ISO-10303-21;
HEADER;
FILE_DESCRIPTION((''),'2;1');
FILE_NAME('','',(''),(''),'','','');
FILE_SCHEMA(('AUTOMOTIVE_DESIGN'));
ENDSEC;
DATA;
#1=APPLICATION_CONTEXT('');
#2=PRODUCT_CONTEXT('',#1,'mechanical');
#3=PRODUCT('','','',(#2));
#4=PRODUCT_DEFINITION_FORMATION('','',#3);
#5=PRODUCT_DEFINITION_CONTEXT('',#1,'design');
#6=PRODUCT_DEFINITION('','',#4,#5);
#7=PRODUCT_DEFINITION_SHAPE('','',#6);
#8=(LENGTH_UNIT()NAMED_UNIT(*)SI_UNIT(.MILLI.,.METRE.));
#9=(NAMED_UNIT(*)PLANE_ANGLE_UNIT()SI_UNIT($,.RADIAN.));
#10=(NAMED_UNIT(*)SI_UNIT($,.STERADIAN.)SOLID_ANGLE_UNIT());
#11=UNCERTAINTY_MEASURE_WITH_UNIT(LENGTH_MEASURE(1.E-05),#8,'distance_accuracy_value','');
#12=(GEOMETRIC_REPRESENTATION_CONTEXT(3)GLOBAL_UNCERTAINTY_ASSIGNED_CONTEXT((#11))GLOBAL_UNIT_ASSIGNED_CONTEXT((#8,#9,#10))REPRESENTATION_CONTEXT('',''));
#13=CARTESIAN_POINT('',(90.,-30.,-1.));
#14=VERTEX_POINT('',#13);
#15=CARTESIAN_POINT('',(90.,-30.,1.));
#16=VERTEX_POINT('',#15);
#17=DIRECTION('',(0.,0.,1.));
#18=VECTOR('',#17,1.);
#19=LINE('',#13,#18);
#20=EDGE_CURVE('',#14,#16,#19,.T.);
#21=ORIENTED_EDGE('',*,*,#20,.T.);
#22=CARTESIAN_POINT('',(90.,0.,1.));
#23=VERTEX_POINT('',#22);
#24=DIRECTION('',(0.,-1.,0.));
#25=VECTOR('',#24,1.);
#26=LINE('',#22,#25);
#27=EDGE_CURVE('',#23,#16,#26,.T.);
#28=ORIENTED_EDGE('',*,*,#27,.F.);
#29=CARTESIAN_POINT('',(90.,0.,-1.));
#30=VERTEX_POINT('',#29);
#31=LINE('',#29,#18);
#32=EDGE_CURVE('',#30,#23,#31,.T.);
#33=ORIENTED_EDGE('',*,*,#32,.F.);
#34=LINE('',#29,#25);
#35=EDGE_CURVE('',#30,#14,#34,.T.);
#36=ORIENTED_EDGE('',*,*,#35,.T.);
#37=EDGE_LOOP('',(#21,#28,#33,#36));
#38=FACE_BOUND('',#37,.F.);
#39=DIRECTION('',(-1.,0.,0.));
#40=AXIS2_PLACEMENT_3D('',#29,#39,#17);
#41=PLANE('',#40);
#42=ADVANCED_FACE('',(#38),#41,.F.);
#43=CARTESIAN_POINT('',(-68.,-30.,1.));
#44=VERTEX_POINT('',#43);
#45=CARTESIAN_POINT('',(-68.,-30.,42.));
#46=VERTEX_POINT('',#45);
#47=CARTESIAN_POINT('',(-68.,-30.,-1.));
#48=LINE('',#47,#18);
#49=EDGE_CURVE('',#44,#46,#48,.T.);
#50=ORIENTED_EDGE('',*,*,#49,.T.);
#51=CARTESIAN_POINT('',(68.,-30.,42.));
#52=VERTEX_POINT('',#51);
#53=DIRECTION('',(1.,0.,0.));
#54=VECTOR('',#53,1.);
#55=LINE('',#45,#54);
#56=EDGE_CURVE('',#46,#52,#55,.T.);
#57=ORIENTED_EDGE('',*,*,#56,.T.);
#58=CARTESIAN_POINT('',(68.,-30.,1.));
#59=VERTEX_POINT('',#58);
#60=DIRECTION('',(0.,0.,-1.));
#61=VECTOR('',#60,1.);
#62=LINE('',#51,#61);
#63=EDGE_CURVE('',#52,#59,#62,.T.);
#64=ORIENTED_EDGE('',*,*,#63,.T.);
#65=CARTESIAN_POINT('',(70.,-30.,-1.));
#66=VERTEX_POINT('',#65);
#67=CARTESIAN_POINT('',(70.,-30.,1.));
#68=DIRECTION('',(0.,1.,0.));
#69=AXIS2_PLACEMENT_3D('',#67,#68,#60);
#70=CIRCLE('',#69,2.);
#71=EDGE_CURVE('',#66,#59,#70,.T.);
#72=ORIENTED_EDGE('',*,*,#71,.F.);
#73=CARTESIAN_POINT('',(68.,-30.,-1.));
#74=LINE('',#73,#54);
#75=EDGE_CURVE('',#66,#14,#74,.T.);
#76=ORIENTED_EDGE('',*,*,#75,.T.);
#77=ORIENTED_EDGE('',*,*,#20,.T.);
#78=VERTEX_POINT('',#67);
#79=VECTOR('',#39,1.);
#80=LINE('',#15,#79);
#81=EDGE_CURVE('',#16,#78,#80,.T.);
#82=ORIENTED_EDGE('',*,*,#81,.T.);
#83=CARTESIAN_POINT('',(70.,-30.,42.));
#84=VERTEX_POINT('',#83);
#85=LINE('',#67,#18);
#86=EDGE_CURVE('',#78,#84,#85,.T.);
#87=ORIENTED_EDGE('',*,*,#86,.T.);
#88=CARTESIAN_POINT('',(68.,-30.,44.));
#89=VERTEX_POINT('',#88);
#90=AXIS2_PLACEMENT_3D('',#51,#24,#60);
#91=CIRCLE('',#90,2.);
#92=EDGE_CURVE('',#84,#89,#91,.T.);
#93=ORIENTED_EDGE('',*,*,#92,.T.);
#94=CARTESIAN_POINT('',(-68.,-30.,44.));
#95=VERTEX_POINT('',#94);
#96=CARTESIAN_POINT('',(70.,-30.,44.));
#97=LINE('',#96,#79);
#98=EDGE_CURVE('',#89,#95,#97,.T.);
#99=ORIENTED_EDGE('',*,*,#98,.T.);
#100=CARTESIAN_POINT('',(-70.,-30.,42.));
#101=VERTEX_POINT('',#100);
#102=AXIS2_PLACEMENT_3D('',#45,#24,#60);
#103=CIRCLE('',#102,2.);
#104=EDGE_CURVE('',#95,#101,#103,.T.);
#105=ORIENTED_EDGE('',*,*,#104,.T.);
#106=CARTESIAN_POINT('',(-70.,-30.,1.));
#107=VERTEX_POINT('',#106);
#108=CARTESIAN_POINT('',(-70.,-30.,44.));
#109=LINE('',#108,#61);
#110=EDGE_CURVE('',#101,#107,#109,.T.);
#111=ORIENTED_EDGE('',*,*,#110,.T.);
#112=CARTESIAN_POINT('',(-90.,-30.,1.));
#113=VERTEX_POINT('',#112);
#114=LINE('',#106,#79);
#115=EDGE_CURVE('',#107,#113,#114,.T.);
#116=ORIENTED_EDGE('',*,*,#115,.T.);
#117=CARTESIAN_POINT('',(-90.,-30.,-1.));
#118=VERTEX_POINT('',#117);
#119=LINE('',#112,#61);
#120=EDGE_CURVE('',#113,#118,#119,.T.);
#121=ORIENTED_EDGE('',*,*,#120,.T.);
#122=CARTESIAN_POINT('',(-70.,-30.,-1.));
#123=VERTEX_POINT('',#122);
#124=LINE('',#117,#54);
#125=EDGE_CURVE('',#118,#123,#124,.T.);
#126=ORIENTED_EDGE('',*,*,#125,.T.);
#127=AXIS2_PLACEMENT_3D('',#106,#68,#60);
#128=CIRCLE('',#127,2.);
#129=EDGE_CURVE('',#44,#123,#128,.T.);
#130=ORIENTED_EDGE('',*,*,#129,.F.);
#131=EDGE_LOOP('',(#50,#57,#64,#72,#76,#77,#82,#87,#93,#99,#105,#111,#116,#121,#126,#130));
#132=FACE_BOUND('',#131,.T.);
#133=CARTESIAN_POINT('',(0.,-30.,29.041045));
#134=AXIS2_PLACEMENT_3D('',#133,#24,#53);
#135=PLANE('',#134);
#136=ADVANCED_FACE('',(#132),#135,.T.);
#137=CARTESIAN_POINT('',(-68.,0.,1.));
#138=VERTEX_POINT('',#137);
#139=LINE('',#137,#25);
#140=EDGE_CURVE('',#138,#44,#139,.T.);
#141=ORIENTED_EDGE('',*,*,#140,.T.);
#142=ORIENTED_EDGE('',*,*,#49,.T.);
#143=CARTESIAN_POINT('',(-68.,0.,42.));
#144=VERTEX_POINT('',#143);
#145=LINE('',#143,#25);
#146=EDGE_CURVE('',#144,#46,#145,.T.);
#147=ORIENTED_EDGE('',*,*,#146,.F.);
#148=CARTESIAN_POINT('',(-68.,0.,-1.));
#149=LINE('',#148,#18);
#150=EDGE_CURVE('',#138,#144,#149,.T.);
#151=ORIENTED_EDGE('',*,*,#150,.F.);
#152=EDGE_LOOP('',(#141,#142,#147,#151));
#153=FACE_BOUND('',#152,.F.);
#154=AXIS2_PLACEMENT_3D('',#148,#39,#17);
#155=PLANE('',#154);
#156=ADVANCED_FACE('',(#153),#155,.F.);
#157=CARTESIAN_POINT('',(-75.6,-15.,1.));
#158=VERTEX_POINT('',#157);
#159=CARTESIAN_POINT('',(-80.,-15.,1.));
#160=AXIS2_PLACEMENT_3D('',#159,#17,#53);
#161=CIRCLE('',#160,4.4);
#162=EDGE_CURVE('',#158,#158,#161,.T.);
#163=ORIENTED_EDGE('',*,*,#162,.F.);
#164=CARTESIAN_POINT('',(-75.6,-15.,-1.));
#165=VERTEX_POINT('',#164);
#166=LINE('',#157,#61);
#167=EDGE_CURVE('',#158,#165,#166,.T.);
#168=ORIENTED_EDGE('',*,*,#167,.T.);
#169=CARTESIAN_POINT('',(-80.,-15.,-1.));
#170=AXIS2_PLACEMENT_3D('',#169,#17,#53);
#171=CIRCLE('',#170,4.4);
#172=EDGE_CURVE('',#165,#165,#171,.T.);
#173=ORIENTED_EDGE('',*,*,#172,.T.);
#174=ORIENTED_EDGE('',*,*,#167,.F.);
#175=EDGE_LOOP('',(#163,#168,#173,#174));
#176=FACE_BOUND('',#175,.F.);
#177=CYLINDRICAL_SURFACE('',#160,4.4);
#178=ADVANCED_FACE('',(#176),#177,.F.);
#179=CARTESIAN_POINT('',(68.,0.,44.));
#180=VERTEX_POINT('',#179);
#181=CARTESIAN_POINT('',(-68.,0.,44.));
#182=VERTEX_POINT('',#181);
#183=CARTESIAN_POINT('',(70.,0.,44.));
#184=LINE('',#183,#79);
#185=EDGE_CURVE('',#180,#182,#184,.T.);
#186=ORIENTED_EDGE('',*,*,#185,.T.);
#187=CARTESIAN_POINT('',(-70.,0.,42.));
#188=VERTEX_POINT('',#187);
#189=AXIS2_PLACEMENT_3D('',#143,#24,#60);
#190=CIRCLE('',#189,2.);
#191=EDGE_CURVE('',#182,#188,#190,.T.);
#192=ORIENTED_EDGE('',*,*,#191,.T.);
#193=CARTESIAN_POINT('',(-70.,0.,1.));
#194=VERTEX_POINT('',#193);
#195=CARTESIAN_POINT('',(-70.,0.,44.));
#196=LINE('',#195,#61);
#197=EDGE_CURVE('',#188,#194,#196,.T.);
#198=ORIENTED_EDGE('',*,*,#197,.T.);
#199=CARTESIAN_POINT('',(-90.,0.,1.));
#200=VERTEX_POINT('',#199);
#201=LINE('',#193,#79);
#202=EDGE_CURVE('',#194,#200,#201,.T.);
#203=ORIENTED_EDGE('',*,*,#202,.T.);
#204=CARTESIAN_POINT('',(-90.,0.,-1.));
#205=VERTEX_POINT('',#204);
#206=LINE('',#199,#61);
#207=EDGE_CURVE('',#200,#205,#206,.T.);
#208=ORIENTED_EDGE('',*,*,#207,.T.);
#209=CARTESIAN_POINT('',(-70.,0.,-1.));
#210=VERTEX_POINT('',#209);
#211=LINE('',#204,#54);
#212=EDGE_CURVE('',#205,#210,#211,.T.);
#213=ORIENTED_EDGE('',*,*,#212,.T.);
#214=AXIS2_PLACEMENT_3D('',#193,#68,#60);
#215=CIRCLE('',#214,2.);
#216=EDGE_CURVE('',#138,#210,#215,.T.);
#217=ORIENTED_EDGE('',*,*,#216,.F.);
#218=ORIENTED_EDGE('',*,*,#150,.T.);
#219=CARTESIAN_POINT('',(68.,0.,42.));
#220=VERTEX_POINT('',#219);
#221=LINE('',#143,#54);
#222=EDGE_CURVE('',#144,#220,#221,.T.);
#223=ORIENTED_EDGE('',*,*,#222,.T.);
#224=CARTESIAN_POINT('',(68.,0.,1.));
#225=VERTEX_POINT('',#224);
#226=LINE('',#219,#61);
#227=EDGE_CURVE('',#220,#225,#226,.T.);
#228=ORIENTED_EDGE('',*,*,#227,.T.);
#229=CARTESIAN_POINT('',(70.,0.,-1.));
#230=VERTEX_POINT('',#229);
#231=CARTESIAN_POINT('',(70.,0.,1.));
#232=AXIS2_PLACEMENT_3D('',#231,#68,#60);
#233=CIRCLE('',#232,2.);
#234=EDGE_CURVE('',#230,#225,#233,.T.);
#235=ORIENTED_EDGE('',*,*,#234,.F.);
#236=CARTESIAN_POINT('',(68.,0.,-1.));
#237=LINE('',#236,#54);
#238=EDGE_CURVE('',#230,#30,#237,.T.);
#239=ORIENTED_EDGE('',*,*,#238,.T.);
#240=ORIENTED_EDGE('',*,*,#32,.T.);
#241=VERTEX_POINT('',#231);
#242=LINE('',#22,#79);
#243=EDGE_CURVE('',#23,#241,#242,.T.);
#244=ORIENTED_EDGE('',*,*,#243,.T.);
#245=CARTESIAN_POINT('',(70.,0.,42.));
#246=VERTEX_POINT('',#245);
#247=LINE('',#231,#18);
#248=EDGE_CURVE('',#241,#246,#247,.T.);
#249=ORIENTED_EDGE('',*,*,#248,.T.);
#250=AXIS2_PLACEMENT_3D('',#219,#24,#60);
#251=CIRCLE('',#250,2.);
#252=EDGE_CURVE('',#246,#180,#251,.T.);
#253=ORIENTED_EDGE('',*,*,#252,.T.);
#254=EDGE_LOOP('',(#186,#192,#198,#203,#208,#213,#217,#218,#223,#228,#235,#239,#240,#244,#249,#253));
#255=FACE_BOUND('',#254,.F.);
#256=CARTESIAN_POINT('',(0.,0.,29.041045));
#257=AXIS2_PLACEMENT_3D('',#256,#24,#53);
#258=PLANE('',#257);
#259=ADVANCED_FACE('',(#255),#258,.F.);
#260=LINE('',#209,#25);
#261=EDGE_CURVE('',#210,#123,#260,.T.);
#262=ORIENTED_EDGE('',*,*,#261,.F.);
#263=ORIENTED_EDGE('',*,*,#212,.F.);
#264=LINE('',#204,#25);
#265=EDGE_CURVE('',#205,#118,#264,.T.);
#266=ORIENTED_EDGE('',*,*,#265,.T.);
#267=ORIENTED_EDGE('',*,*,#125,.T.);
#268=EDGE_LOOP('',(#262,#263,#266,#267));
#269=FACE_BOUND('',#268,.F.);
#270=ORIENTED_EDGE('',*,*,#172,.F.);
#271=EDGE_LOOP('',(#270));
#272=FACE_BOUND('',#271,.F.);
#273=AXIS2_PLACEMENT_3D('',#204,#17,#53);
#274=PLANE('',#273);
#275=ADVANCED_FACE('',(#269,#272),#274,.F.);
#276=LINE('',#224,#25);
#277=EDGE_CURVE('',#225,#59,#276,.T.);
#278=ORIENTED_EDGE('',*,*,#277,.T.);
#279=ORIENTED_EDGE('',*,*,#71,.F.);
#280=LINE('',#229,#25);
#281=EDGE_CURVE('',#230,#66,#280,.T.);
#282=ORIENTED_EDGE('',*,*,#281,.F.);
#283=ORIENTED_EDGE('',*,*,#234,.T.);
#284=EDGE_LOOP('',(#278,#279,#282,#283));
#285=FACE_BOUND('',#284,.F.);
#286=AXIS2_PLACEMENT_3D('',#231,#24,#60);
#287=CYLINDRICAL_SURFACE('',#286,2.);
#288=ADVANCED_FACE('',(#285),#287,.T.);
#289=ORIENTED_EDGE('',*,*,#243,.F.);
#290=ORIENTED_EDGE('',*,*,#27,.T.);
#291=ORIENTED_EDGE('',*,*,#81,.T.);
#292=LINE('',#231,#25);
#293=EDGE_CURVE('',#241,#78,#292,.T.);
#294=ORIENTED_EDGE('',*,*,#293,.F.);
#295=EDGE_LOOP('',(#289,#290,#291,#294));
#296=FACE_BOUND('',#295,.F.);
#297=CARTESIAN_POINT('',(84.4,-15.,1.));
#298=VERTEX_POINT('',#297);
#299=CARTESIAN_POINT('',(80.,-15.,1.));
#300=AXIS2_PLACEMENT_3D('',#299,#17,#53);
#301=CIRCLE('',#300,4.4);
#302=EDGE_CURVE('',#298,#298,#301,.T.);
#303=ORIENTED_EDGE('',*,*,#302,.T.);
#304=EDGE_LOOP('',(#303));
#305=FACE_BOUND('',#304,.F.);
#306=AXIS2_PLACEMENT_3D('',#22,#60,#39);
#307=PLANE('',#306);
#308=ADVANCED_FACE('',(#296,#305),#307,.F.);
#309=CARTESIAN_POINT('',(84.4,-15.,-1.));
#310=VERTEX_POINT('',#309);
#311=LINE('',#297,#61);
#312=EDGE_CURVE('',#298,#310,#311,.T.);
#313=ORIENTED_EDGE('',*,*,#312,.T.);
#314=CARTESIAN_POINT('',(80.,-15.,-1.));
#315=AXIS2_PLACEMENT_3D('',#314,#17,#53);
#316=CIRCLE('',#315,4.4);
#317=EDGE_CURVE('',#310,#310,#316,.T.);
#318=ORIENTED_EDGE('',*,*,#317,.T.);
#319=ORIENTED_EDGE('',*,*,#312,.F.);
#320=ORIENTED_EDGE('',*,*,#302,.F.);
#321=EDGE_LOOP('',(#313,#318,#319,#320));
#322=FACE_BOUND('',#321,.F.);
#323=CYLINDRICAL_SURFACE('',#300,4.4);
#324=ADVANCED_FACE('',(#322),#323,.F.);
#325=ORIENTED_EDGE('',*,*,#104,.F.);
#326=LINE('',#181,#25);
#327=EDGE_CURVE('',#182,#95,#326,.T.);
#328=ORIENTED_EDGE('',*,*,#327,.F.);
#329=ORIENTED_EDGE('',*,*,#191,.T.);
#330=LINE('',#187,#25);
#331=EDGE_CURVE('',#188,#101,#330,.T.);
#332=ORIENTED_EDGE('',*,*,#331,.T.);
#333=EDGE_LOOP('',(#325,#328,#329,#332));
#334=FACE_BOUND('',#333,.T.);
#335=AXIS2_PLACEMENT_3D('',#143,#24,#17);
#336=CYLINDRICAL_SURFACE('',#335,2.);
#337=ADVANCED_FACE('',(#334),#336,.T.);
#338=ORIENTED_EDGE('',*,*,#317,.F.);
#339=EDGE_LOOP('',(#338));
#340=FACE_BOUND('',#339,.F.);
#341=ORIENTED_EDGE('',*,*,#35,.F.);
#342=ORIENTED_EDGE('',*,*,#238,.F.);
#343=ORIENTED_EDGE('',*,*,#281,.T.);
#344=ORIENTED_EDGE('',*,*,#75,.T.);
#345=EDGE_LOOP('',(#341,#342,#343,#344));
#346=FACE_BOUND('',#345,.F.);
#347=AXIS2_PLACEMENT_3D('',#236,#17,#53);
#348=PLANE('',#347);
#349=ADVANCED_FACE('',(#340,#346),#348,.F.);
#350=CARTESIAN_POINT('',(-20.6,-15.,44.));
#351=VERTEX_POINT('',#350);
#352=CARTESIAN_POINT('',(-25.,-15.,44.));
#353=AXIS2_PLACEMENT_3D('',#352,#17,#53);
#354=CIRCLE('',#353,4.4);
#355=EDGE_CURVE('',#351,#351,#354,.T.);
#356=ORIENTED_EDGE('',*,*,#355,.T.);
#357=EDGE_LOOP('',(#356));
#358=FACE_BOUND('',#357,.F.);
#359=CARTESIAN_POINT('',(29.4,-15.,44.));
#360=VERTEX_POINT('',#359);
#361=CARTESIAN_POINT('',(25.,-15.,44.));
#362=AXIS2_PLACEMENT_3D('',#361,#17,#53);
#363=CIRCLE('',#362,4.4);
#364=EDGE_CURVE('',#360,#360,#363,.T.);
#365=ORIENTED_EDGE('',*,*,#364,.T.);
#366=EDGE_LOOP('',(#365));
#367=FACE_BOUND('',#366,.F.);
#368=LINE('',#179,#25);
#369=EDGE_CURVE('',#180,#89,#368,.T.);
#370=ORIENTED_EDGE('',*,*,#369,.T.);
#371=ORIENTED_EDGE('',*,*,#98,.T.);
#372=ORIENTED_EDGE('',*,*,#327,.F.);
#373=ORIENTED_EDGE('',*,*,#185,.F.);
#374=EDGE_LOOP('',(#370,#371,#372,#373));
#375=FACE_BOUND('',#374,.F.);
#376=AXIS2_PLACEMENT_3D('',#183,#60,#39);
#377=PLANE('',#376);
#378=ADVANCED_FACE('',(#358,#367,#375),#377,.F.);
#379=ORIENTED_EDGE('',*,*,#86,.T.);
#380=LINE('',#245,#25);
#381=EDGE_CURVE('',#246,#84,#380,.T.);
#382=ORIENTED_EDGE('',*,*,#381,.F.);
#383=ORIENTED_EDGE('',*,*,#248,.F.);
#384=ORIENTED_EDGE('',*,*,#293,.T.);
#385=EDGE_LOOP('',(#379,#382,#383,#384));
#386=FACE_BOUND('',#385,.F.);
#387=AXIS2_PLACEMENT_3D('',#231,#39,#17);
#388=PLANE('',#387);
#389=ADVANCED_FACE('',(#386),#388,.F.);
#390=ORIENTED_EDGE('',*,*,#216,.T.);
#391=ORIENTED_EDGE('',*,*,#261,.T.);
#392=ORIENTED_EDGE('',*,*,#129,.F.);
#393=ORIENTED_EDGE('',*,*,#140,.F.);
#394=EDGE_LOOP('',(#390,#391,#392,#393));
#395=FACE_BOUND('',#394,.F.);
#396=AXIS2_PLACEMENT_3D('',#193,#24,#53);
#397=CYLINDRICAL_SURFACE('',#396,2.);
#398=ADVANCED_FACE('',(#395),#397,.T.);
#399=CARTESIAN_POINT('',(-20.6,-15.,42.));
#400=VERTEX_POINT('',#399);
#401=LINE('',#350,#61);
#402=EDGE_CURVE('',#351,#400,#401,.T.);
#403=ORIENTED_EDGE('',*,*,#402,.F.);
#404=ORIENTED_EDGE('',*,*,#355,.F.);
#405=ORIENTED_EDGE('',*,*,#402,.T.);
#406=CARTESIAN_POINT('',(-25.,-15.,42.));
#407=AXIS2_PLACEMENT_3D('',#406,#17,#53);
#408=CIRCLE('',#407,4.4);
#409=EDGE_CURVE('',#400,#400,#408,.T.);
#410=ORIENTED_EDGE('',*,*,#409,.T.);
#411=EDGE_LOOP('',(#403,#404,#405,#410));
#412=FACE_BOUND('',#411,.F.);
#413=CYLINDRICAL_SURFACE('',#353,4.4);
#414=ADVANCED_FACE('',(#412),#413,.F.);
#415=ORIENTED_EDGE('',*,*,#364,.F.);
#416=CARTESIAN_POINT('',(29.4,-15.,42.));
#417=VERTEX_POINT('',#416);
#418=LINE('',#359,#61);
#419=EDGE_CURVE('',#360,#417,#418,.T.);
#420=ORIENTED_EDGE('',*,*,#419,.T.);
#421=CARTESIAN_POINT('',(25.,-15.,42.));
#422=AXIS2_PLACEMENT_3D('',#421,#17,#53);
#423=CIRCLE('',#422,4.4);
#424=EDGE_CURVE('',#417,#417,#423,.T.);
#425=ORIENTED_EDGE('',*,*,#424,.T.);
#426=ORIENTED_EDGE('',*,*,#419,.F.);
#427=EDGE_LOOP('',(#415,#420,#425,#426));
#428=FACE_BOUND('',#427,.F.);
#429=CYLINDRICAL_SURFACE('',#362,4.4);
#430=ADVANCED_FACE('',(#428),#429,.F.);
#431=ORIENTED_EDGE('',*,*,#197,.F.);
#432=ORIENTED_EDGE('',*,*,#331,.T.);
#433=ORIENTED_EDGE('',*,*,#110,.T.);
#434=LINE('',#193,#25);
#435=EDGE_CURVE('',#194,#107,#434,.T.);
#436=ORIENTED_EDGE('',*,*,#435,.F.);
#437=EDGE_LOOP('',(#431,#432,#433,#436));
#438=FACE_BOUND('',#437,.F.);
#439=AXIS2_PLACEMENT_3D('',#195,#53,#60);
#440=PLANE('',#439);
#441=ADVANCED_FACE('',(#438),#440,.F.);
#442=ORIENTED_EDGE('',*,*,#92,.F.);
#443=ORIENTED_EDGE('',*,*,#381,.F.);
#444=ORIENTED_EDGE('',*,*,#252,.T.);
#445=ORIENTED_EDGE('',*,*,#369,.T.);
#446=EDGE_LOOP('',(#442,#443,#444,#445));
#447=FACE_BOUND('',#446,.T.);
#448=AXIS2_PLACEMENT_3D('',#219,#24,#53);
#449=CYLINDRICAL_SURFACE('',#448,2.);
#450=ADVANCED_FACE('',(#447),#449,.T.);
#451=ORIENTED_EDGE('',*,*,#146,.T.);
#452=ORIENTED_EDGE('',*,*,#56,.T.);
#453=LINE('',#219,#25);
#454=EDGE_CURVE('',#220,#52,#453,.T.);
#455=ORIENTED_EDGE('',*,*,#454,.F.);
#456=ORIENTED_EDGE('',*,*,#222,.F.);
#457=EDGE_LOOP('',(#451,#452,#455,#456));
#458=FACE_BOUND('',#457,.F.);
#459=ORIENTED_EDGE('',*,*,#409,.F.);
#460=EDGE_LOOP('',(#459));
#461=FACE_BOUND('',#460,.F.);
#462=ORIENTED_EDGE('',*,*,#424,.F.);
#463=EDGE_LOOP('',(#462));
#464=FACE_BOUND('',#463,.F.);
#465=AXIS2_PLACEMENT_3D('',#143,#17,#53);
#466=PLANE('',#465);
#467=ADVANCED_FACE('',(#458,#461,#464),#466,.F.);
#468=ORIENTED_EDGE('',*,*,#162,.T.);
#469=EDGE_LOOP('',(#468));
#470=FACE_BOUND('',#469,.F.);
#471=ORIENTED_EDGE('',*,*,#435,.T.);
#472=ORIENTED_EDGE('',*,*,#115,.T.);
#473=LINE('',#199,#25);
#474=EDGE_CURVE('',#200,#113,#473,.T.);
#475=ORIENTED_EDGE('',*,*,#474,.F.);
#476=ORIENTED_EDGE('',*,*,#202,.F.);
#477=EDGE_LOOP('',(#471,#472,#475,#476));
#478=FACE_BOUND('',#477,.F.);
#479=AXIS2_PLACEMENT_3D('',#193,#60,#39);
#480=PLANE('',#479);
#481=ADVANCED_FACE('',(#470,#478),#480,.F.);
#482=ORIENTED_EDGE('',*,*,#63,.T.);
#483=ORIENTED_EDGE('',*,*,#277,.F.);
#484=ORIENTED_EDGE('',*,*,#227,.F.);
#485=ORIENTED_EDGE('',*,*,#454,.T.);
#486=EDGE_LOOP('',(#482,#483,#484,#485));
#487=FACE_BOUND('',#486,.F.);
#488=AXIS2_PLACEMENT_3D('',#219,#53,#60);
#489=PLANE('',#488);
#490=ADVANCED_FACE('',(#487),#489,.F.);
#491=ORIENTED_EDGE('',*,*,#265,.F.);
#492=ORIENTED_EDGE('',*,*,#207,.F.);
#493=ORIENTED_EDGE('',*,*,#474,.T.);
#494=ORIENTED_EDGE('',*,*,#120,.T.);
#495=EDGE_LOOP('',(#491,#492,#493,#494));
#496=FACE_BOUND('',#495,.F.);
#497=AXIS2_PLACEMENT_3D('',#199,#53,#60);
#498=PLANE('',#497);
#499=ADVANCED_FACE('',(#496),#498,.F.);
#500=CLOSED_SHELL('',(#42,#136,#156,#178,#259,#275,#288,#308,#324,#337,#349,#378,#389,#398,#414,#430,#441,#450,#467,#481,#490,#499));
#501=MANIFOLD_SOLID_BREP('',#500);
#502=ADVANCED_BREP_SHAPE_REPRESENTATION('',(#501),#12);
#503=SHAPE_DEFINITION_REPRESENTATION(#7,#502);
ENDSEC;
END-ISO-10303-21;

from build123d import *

# Parameters (mm, degrees)
F1_DEPTH = 30
F2_R     = 4.4
F3_R     = 4.4
F4_DEPTH = 25
F5_R     = 2
F6_R     = 2


# Not quite as in the source:
# - a feature names something its author has since deleted; it is built from what else it names


with BuildPart() as f1:
    # F0 (on Front) → F1 (new body)
    with BuildSketch(Plane.XZ):
        Polygon((90, -1), (90, 1), (70, 1), (70, 44), (-70, 44), (-70, 1), (-90, 1), (-90, -1), (-68, -1), (-68, 42), (68, 42), (68, -1), align=None)
    extrude(amount=F1_DEPTH)

    # F2 (on face) + F3 (on face) → F4 (cut)
    with BuildSketch(Plane.XY.offset(1)):
        with Locations((-80, -15)):
            Circle(F2_R)
        with Locations((80, -15)):
            Circle(F2_R)
    with BuildSketch(Plane.XY.offset(44)):
        with Locations((-25, -15)):
            Circle(F3_R)
        with Locations((25, -15)):
            Circle(F3_R)
    extrude(amount=-F4_DEPTH, mode=Mode.SUBTRACT)

    # F5
    f5_edges = [f1.edges().sort_by_distance(p)[0] for p in [
        (-70, -15, 44),
        (70, -15, 44),
    ]]
    fillet(f5_edges, radius=F5_R)

    # F6
    f6_edges = [f1.edges().sort_by_distance(p)[0] for p in [
        (68, -15, -1),
        (-68, -15, -1),
    ]]
    fillet(f6_edges, radius=F6_R)


solid = f1.part
